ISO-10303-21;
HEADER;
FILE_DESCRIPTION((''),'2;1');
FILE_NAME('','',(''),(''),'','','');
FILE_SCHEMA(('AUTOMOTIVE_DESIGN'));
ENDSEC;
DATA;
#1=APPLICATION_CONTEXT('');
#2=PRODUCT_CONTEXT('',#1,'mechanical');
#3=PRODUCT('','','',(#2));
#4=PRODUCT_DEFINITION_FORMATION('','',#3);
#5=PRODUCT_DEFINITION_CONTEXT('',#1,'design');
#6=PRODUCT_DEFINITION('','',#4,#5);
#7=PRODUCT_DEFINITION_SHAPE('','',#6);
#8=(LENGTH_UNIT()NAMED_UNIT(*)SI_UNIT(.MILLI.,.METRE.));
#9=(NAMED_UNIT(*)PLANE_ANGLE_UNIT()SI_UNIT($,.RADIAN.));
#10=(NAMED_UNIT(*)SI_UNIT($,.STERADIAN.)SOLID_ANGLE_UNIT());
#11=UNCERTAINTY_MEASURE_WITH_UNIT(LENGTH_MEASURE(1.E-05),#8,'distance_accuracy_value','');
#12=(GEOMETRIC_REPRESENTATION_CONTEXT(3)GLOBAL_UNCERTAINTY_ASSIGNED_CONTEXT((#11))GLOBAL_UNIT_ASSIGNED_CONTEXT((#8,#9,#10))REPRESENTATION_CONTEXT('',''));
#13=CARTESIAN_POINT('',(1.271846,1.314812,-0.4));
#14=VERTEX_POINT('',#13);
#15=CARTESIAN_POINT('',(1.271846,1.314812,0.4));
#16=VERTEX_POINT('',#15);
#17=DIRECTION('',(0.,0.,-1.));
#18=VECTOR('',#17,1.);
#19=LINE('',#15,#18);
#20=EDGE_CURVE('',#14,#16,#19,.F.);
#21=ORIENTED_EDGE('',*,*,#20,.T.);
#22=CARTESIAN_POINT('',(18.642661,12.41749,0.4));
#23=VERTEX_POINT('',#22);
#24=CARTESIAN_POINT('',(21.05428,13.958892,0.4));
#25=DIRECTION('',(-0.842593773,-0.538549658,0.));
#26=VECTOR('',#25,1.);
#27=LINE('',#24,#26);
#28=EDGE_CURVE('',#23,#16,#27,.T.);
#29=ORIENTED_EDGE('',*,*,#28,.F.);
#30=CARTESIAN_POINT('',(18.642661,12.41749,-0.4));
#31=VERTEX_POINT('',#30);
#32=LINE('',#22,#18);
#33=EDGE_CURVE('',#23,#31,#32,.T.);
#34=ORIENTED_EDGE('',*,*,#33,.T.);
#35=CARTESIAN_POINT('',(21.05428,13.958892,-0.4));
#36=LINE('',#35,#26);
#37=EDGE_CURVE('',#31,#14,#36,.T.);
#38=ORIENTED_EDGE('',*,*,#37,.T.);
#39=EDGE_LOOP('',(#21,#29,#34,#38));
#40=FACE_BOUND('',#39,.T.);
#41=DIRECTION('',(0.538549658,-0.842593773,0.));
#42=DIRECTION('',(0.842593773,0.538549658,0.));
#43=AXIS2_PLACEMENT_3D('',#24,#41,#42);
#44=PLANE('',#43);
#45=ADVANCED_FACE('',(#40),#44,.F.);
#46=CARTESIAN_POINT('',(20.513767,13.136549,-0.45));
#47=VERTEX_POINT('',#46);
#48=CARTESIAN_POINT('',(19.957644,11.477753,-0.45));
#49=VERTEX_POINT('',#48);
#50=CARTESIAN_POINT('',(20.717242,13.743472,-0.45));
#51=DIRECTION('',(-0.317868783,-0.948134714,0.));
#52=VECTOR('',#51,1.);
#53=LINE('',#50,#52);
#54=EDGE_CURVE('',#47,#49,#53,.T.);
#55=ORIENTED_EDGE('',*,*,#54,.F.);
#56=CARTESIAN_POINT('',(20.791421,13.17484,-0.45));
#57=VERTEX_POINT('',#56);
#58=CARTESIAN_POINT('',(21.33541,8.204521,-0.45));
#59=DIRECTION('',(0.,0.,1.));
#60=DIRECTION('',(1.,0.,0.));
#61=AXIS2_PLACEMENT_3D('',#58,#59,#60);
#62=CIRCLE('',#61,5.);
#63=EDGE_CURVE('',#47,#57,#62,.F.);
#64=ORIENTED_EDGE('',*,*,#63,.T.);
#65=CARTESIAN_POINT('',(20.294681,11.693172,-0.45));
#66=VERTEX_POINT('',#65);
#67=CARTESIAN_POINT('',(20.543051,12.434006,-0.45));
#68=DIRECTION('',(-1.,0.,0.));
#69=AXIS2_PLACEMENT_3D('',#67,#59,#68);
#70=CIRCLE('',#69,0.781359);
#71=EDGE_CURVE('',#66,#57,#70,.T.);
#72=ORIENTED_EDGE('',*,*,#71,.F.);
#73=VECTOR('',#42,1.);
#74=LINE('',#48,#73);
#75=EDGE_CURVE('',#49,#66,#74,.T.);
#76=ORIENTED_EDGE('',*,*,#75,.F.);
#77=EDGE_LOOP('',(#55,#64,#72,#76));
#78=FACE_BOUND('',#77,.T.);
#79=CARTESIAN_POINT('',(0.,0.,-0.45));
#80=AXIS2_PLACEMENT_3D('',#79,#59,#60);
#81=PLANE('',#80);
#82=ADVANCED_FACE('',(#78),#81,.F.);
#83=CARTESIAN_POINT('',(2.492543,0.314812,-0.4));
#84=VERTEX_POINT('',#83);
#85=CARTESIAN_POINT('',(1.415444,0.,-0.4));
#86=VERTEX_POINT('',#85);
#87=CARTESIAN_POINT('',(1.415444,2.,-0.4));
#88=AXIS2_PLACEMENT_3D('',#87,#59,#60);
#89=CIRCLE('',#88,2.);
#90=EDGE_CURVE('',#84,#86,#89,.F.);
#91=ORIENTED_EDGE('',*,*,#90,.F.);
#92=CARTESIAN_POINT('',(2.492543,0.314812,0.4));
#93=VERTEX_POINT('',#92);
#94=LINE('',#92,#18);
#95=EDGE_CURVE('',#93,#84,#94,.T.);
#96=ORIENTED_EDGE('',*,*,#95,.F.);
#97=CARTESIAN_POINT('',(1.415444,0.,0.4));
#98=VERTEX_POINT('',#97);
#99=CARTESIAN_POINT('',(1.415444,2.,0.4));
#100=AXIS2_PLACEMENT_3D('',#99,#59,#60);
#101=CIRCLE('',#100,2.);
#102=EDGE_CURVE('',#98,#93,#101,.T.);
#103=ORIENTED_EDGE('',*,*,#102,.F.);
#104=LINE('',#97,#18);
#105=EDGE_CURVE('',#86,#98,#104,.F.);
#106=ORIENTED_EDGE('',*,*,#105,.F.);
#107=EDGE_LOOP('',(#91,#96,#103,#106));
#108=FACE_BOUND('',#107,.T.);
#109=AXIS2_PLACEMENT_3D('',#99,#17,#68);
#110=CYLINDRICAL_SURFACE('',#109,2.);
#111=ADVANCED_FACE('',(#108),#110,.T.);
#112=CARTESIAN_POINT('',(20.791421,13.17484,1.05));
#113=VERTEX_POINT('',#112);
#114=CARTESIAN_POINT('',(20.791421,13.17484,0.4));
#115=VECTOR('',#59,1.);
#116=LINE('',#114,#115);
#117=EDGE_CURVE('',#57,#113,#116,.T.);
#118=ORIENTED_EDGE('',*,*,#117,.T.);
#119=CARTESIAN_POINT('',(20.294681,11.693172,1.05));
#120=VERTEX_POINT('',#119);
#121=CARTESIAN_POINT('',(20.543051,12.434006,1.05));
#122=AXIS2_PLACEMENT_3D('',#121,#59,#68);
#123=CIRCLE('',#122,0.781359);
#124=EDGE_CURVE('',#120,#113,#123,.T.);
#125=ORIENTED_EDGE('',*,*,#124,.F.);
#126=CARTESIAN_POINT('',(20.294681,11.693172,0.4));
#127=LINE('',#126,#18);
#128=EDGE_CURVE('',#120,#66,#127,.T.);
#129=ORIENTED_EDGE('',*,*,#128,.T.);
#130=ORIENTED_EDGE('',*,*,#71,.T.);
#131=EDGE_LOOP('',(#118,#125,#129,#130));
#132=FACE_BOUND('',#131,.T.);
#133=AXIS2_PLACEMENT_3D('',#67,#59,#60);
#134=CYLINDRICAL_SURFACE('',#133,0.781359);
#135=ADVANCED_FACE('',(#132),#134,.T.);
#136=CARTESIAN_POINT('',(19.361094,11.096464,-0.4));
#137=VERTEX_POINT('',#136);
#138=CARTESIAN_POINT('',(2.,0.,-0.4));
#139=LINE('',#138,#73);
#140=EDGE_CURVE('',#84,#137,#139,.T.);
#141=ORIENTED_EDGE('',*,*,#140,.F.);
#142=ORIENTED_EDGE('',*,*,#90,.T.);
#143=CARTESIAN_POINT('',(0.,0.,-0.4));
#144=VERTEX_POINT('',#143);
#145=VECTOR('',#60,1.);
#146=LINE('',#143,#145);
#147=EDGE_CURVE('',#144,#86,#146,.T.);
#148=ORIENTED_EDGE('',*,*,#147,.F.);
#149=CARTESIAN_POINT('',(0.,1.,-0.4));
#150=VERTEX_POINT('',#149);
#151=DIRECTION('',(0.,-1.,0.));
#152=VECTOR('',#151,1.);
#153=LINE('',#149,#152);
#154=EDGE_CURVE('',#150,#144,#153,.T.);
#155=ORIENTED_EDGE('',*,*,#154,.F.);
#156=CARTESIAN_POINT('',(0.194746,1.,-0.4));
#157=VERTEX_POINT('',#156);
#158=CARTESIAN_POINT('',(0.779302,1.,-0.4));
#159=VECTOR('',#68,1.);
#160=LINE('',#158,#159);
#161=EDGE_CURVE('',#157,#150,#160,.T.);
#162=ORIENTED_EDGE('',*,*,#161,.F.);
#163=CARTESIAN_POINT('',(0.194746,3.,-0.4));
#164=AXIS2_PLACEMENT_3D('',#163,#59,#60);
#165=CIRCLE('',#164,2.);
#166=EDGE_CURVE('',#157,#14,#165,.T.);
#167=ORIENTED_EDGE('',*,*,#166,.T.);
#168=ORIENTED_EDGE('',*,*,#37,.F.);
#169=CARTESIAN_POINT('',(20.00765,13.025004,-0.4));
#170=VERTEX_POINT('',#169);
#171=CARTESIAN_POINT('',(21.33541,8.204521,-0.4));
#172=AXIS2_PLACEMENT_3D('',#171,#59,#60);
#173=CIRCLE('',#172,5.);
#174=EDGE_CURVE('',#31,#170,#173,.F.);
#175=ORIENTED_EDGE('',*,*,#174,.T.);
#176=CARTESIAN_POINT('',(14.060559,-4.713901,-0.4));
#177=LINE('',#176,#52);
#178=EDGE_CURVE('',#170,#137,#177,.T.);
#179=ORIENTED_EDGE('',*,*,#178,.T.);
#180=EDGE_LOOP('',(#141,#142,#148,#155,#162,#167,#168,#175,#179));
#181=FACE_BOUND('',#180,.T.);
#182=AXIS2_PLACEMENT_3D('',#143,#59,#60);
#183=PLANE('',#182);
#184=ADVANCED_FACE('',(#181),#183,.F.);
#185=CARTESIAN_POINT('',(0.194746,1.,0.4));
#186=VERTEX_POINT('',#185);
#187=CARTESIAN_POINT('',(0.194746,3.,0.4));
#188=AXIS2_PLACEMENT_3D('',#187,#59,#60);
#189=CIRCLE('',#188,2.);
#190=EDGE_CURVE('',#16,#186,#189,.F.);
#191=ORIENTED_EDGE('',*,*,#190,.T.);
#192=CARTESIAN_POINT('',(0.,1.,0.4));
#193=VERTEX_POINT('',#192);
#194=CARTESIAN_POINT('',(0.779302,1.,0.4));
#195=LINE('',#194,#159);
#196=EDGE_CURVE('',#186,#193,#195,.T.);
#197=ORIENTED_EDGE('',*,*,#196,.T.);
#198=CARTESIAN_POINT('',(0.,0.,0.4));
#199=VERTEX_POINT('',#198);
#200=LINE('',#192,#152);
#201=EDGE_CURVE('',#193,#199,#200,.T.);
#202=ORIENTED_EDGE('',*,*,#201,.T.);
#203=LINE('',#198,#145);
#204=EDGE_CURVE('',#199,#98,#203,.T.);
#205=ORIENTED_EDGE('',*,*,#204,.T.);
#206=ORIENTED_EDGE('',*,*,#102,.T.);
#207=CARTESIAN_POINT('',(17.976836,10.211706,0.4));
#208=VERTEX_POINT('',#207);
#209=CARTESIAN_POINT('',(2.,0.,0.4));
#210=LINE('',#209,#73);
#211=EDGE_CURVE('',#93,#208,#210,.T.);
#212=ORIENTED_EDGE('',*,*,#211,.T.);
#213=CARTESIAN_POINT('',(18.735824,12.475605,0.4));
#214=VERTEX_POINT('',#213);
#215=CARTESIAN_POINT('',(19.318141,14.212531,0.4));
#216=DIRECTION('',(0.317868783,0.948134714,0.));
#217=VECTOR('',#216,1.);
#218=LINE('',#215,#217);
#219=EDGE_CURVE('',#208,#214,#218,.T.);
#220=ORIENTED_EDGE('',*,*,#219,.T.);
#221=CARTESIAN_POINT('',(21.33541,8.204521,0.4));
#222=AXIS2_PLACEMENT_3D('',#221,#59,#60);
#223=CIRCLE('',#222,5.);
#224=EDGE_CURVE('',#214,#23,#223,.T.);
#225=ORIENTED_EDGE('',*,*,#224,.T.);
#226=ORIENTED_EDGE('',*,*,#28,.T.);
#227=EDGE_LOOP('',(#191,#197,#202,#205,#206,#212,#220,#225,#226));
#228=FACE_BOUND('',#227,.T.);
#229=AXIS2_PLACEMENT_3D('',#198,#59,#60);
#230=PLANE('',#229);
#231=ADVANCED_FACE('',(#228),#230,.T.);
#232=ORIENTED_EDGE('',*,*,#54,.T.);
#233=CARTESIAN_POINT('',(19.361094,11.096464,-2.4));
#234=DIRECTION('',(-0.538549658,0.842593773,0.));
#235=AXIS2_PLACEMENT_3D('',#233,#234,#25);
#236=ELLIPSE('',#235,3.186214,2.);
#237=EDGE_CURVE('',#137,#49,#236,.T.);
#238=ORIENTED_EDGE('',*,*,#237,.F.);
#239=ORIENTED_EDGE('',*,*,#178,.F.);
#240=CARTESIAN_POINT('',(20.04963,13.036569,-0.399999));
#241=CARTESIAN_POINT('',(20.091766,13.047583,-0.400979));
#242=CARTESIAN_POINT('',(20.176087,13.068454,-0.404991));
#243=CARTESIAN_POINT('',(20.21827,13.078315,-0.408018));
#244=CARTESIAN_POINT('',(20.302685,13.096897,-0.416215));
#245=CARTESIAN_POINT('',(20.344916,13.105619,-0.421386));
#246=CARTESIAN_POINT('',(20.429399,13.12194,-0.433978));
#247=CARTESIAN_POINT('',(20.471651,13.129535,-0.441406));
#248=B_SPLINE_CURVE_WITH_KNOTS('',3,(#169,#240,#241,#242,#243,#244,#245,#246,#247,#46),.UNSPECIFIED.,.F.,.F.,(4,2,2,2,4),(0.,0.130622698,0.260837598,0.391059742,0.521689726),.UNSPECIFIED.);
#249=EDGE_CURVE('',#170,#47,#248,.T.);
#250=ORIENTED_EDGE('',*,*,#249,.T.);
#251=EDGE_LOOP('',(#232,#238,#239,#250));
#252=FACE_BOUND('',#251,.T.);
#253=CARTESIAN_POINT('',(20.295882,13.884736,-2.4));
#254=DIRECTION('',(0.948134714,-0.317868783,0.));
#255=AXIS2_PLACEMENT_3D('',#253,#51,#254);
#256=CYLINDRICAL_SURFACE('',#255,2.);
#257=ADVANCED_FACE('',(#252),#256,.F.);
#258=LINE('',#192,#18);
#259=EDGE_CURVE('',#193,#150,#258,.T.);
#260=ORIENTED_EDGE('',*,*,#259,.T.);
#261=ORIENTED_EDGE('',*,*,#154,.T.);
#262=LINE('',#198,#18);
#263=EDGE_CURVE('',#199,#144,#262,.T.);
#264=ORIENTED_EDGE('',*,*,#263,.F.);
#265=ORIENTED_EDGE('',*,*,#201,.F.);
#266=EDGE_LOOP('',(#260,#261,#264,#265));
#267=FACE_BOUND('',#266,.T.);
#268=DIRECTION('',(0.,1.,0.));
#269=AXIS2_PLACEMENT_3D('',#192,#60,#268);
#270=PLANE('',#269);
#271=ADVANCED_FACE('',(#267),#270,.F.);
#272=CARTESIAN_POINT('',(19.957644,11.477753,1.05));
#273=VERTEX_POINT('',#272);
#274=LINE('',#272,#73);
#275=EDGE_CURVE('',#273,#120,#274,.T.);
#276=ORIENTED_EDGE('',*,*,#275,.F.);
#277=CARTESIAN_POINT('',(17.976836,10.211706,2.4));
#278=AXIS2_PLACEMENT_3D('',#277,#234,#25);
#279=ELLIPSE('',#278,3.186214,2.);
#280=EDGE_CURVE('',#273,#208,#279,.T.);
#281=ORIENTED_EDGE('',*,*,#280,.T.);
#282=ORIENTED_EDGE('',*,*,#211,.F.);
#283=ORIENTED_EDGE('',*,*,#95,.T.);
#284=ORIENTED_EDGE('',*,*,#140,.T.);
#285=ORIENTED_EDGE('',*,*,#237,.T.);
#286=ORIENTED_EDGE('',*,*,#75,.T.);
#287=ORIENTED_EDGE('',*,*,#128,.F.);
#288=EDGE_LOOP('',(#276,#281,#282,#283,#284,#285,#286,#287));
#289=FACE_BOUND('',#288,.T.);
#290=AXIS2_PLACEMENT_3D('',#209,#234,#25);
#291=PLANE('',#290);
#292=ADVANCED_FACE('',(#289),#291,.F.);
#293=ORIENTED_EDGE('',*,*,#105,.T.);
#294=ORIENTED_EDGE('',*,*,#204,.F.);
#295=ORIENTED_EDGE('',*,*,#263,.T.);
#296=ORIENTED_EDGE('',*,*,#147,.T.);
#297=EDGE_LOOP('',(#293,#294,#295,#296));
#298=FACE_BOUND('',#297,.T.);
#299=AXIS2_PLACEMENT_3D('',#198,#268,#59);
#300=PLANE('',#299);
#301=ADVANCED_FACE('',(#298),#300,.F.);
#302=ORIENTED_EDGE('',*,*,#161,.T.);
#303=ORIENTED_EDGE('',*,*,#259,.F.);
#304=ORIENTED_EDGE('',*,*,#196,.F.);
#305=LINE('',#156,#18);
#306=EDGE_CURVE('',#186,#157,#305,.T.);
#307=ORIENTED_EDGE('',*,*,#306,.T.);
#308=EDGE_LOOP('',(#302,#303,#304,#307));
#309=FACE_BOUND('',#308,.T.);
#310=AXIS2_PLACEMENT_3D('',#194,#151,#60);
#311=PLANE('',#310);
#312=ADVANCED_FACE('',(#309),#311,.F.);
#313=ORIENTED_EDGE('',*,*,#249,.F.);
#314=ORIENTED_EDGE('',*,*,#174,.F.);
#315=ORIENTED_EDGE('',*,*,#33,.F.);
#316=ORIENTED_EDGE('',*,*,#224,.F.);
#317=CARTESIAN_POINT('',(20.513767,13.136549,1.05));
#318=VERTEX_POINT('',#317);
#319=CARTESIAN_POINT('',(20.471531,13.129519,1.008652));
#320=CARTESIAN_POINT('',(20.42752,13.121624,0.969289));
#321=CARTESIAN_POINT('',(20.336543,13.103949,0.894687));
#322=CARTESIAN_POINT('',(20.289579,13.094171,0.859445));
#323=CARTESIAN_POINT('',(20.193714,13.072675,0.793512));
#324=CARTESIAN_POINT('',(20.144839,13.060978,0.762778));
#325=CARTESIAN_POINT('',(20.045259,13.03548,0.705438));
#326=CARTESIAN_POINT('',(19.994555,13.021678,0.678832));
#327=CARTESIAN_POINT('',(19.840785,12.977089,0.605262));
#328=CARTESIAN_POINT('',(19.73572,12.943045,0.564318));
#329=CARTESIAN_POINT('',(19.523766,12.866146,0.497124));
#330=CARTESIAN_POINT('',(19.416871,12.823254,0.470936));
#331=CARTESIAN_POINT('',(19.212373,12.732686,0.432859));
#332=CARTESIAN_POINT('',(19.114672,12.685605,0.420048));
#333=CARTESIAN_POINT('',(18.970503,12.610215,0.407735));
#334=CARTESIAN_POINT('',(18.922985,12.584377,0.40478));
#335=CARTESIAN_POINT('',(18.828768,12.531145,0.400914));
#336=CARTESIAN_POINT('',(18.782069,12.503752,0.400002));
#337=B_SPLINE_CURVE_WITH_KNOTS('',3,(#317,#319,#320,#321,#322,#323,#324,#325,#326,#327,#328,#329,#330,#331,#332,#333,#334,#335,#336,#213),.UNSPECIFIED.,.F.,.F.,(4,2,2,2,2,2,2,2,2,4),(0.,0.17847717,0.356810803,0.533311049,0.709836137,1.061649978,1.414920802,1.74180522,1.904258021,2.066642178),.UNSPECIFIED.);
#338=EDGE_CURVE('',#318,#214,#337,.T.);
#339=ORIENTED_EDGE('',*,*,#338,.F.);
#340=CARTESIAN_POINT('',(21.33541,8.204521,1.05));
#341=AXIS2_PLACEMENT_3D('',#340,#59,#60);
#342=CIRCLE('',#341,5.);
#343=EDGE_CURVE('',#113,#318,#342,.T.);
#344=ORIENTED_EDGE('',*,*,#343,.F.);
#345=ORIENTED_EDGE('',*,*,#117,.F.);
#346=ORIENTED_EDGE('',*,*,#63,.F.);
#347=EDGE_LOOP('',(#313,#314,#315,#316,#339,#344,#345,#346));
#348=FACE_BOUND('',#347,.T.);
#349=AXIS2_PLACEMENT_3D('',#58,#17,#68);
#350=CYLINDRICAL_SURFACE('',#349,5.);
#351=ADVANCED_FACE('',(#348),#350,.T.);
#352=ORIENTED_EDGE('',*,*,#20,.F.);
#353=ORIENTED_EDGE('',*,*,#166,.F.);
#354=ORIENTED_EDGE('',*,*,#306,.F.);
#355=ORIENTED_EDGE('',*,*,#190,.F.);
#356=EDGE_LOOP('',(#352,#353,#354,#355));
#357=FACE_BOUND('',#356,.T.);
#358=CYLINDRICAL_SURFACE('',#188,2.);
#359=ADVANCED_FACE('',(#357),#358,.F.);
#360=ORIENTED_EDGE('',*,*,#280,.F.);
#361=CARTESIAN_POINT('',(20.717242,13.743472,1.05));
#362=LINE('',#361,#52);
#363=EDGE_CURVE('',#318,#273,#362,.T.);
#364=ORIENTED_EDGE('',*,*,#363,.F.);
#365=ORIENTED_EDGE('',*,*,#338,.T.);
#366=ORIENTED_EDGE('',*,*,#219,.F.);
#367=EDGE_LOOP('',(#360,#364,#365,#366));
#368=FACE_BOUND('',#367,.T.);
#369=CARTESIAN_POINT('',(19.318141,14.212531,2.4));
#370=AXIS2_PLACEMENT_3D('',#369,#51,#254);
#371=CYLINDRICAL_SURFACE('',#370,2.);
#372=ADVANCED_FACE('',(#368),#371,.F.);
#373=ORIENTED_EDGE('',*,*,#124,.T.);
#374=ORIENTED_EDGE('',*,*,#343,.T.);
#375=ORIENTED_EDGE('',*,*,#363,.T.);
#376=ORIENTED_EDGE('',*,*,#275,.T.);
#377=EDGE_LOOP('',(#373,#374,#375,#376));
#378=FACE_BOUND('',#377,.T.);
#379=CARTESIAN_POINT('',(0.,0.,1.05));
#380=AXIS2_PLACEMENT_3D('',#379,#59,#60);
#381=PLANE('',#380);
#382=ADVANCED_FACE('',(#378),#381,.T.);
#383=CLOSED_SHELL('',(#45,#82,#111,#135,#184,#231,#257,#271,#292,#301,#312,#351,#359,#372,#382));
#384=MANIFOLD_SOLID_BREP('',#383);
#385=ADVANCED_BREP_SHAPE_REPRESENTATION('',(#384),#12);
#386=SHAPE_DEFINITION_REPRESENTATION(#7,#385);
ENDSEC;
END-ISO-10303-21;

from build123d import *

# Parameters (mm, degrees)
BOSS_EXTRUDE1_DEPTH     = 0.4
BOSS_EXTRUDE2_START     = -0.1
BOSS_EXTRUDE2_DEPTH     = 0.75
FILLET1_R               = 2
FILLET2_R               = 2
CUT_EXTRUDE1_DEPTH      = 26.275598114
CUT_EXTRUDE1_DEPTH_BACK = 26.275598114
FILLET3_R               = 5
BOSS_EXTRUDE4_DEPTH     = 1.5


with BuildPart() as part:
    # Sketch1 → Boss-Extrude1 (new, symmetric)
    with BuildSketch(Plane.XY):
        Polygon((0, 0), (2, 0), (20.294681103, 11.693172413), (21.054279514, 13.958892298), (0.779302489, 1), (0, 1), align=None)
    extrude(amount=BOSS_EXTRUDE1_DEPTH, both=True)

    # Sketch2 → Boss-Extrude2 (add, symmetric)
    with BuildSketch(Plane.XY.offset(0.4).offset(BOSS_EXTRUDE2_START)):
        Polygon((21.054279514, 13.958892298), (20.717242005, 13.743472434), (19.957643594, 11.47775255), (20.294681103, 11.693172413), align=None)
    extrude(amount=BOSS_EXTRUDE2_DEPTH, both=True)

    # Fillet1
    fillet1_edges = [part.edges().sort_by_distance(p)[0] for p in [
        (0.779302489, 1, 0),
        (2, 0, 0),
    ]]
    fillet(fillet1_edges, radius=FILLET1_R)

    # Fillet2
    # the kernel refuses this fillet: 2 mm, written as the material it adds along each edge
    with BuildSketch(Plane(origin=(21.070401948, 14.796873144, -0.4), x_dir=(-0.9481347144095073, 0.31786878319772466, 0), z_dir=(-0.3178687831977247, -0.9481347144095074, 0))) as fillet2_piece_1_section:
        with BuildLine():
            CenterArc((0.444409721, 2), FILLET2_R, 257.161431859, 12.838568141)
            Line((0, 0.05), (0, 0))
            Line((0, 0), (0.444409721, 0))
        make_face()
    fillet2_piece_1 = extrude(amount=4.611708902, mode=Mode.PRIVATE)
    fillet2_piece_1 = split(fillet2_piece_1, bisect_by=Plane(origin=(21.445983631, 14.209252703, -0.4), z_dir=(0.5385496583097051, -0.8425937725467118, 0)), keep=Keep.TOP, mode=Mode.PRIVATE)
    fillet2_piece_1 = split(fillet2_piece_1, bisect_by=Plane(origin=(22.253808119, 12.945362044, -0.4), z_dir=(-0.538549658309705, 0.8425937725467119, 0)), keep=Keep.TOP, mode=Mode.PRIVATE)
    add(fillet2_piece_1)
    with BuildSketch(Plane(origin=(21.889888122, 17.241225439, 0.4), x_dir=(-0.9481347144095071, 0.3178687831977246, 0), z_dir=(-0.3178687831977247, -0.9481347144095074, 0))) as fillet2_piece_2_section:
        with BuildLine():
            CenterArc((1.475635456, -2), FILLET2_R, 90, 47.545849796)
            Line((0, -0.65), (0, 0))
            Line((0, 0), (1.475635456, 0))
        make_face()
    fillet2_piece_2 = extrude(amount=9.76783758, mode=Mode.PRIVATE)
    fillet2_piece_2 = split(fillet2_piece_2, bisect_by=Plane(origin=(23.136984265, 15.290067496, 0.4), z_dir=(0.5385496583097051, -0.8425937725467118, 0)), keep=Keep.TOP, mode=Mode.PRIVATE)
    fillet2_piece_2 = split(fillet2_piece_2, bisect_by=Plane(origin=(23.944808753, 14.026176837, 0.4), z_dir=(-0.538549658309705, 0.8425937725467119, 0)), keep=Keep.TOP, mode=Mode.PRIVATE)
    add(fillet2_piece_2)

    # Sketch4 → Cut-Extrude1 (cut, two sides: drawn at the far end of the back side and taken through both)
    with BuildSketch(Plane.XY.offset(0.4).offset(-CUT_EXTRUDE1_DEPTH_BACK)):
        Polygon((17.612630282, 13.011216265), (21.976187612, 13.235824871), (21.976187612, 14.520118874), (17.612630282, 14.232504072), align=None)
    extrude(amount=CUT_EXTRUDE1_DEPTH + CUT_EXTRUDE1_DEPTH_BACK, mode=Mode.SUBTRACT)

    # Fillet3
    # the kernel refuses this fillet: 5 mm, written as the material it takes off along each edge
    with BuildSketch(Plane(origin=(19.743162439, 13.120882718, -3.665218242), x_dir=(-0.8425937725466615, -0.5385496583097837, 0), z_dir=(0, 0, 1))) as fillet3_piece_1:
        with BuildLine():
            CenterArc((1.306087297, 5), FILLET3_R, 243.661056807, 26.338943193)
            Line((-0.912314796, 0.519074632), (-0.956682838, 0.429456124))
            ThreePointArc((-0.956682838, 0.429456124), (-0.505609749, 0.172620891), (-0.049452351, -0.086916425))
            Line((-0.049452351, -0.086916425), (0, -0.1))
            Line((0, -0.1), (1.306087297, -0.1))
            Line((1.306087297, -0.1), (1.306087297, 0))
        make_face()
    extrude(amount=7.476378223, mode=Mode.SUBTRACT)

    # Sketch5 → Boss-Extrude4 (add)
    with BuildSketch(Plane.XY.offset(1.05)):
        with BuildLine():
            Line((20.79142067, 13.174840488), (20.294681103, 11.693172413))
            ThreePointArc((20.294681103, 11.693172413), (21.283884924, 12.185636667), (20.79142067, 13.174840488))
        make_face()
    extrude(amount=-BOSS_EXTRUDE4_DEPTH)


solid = part.part
